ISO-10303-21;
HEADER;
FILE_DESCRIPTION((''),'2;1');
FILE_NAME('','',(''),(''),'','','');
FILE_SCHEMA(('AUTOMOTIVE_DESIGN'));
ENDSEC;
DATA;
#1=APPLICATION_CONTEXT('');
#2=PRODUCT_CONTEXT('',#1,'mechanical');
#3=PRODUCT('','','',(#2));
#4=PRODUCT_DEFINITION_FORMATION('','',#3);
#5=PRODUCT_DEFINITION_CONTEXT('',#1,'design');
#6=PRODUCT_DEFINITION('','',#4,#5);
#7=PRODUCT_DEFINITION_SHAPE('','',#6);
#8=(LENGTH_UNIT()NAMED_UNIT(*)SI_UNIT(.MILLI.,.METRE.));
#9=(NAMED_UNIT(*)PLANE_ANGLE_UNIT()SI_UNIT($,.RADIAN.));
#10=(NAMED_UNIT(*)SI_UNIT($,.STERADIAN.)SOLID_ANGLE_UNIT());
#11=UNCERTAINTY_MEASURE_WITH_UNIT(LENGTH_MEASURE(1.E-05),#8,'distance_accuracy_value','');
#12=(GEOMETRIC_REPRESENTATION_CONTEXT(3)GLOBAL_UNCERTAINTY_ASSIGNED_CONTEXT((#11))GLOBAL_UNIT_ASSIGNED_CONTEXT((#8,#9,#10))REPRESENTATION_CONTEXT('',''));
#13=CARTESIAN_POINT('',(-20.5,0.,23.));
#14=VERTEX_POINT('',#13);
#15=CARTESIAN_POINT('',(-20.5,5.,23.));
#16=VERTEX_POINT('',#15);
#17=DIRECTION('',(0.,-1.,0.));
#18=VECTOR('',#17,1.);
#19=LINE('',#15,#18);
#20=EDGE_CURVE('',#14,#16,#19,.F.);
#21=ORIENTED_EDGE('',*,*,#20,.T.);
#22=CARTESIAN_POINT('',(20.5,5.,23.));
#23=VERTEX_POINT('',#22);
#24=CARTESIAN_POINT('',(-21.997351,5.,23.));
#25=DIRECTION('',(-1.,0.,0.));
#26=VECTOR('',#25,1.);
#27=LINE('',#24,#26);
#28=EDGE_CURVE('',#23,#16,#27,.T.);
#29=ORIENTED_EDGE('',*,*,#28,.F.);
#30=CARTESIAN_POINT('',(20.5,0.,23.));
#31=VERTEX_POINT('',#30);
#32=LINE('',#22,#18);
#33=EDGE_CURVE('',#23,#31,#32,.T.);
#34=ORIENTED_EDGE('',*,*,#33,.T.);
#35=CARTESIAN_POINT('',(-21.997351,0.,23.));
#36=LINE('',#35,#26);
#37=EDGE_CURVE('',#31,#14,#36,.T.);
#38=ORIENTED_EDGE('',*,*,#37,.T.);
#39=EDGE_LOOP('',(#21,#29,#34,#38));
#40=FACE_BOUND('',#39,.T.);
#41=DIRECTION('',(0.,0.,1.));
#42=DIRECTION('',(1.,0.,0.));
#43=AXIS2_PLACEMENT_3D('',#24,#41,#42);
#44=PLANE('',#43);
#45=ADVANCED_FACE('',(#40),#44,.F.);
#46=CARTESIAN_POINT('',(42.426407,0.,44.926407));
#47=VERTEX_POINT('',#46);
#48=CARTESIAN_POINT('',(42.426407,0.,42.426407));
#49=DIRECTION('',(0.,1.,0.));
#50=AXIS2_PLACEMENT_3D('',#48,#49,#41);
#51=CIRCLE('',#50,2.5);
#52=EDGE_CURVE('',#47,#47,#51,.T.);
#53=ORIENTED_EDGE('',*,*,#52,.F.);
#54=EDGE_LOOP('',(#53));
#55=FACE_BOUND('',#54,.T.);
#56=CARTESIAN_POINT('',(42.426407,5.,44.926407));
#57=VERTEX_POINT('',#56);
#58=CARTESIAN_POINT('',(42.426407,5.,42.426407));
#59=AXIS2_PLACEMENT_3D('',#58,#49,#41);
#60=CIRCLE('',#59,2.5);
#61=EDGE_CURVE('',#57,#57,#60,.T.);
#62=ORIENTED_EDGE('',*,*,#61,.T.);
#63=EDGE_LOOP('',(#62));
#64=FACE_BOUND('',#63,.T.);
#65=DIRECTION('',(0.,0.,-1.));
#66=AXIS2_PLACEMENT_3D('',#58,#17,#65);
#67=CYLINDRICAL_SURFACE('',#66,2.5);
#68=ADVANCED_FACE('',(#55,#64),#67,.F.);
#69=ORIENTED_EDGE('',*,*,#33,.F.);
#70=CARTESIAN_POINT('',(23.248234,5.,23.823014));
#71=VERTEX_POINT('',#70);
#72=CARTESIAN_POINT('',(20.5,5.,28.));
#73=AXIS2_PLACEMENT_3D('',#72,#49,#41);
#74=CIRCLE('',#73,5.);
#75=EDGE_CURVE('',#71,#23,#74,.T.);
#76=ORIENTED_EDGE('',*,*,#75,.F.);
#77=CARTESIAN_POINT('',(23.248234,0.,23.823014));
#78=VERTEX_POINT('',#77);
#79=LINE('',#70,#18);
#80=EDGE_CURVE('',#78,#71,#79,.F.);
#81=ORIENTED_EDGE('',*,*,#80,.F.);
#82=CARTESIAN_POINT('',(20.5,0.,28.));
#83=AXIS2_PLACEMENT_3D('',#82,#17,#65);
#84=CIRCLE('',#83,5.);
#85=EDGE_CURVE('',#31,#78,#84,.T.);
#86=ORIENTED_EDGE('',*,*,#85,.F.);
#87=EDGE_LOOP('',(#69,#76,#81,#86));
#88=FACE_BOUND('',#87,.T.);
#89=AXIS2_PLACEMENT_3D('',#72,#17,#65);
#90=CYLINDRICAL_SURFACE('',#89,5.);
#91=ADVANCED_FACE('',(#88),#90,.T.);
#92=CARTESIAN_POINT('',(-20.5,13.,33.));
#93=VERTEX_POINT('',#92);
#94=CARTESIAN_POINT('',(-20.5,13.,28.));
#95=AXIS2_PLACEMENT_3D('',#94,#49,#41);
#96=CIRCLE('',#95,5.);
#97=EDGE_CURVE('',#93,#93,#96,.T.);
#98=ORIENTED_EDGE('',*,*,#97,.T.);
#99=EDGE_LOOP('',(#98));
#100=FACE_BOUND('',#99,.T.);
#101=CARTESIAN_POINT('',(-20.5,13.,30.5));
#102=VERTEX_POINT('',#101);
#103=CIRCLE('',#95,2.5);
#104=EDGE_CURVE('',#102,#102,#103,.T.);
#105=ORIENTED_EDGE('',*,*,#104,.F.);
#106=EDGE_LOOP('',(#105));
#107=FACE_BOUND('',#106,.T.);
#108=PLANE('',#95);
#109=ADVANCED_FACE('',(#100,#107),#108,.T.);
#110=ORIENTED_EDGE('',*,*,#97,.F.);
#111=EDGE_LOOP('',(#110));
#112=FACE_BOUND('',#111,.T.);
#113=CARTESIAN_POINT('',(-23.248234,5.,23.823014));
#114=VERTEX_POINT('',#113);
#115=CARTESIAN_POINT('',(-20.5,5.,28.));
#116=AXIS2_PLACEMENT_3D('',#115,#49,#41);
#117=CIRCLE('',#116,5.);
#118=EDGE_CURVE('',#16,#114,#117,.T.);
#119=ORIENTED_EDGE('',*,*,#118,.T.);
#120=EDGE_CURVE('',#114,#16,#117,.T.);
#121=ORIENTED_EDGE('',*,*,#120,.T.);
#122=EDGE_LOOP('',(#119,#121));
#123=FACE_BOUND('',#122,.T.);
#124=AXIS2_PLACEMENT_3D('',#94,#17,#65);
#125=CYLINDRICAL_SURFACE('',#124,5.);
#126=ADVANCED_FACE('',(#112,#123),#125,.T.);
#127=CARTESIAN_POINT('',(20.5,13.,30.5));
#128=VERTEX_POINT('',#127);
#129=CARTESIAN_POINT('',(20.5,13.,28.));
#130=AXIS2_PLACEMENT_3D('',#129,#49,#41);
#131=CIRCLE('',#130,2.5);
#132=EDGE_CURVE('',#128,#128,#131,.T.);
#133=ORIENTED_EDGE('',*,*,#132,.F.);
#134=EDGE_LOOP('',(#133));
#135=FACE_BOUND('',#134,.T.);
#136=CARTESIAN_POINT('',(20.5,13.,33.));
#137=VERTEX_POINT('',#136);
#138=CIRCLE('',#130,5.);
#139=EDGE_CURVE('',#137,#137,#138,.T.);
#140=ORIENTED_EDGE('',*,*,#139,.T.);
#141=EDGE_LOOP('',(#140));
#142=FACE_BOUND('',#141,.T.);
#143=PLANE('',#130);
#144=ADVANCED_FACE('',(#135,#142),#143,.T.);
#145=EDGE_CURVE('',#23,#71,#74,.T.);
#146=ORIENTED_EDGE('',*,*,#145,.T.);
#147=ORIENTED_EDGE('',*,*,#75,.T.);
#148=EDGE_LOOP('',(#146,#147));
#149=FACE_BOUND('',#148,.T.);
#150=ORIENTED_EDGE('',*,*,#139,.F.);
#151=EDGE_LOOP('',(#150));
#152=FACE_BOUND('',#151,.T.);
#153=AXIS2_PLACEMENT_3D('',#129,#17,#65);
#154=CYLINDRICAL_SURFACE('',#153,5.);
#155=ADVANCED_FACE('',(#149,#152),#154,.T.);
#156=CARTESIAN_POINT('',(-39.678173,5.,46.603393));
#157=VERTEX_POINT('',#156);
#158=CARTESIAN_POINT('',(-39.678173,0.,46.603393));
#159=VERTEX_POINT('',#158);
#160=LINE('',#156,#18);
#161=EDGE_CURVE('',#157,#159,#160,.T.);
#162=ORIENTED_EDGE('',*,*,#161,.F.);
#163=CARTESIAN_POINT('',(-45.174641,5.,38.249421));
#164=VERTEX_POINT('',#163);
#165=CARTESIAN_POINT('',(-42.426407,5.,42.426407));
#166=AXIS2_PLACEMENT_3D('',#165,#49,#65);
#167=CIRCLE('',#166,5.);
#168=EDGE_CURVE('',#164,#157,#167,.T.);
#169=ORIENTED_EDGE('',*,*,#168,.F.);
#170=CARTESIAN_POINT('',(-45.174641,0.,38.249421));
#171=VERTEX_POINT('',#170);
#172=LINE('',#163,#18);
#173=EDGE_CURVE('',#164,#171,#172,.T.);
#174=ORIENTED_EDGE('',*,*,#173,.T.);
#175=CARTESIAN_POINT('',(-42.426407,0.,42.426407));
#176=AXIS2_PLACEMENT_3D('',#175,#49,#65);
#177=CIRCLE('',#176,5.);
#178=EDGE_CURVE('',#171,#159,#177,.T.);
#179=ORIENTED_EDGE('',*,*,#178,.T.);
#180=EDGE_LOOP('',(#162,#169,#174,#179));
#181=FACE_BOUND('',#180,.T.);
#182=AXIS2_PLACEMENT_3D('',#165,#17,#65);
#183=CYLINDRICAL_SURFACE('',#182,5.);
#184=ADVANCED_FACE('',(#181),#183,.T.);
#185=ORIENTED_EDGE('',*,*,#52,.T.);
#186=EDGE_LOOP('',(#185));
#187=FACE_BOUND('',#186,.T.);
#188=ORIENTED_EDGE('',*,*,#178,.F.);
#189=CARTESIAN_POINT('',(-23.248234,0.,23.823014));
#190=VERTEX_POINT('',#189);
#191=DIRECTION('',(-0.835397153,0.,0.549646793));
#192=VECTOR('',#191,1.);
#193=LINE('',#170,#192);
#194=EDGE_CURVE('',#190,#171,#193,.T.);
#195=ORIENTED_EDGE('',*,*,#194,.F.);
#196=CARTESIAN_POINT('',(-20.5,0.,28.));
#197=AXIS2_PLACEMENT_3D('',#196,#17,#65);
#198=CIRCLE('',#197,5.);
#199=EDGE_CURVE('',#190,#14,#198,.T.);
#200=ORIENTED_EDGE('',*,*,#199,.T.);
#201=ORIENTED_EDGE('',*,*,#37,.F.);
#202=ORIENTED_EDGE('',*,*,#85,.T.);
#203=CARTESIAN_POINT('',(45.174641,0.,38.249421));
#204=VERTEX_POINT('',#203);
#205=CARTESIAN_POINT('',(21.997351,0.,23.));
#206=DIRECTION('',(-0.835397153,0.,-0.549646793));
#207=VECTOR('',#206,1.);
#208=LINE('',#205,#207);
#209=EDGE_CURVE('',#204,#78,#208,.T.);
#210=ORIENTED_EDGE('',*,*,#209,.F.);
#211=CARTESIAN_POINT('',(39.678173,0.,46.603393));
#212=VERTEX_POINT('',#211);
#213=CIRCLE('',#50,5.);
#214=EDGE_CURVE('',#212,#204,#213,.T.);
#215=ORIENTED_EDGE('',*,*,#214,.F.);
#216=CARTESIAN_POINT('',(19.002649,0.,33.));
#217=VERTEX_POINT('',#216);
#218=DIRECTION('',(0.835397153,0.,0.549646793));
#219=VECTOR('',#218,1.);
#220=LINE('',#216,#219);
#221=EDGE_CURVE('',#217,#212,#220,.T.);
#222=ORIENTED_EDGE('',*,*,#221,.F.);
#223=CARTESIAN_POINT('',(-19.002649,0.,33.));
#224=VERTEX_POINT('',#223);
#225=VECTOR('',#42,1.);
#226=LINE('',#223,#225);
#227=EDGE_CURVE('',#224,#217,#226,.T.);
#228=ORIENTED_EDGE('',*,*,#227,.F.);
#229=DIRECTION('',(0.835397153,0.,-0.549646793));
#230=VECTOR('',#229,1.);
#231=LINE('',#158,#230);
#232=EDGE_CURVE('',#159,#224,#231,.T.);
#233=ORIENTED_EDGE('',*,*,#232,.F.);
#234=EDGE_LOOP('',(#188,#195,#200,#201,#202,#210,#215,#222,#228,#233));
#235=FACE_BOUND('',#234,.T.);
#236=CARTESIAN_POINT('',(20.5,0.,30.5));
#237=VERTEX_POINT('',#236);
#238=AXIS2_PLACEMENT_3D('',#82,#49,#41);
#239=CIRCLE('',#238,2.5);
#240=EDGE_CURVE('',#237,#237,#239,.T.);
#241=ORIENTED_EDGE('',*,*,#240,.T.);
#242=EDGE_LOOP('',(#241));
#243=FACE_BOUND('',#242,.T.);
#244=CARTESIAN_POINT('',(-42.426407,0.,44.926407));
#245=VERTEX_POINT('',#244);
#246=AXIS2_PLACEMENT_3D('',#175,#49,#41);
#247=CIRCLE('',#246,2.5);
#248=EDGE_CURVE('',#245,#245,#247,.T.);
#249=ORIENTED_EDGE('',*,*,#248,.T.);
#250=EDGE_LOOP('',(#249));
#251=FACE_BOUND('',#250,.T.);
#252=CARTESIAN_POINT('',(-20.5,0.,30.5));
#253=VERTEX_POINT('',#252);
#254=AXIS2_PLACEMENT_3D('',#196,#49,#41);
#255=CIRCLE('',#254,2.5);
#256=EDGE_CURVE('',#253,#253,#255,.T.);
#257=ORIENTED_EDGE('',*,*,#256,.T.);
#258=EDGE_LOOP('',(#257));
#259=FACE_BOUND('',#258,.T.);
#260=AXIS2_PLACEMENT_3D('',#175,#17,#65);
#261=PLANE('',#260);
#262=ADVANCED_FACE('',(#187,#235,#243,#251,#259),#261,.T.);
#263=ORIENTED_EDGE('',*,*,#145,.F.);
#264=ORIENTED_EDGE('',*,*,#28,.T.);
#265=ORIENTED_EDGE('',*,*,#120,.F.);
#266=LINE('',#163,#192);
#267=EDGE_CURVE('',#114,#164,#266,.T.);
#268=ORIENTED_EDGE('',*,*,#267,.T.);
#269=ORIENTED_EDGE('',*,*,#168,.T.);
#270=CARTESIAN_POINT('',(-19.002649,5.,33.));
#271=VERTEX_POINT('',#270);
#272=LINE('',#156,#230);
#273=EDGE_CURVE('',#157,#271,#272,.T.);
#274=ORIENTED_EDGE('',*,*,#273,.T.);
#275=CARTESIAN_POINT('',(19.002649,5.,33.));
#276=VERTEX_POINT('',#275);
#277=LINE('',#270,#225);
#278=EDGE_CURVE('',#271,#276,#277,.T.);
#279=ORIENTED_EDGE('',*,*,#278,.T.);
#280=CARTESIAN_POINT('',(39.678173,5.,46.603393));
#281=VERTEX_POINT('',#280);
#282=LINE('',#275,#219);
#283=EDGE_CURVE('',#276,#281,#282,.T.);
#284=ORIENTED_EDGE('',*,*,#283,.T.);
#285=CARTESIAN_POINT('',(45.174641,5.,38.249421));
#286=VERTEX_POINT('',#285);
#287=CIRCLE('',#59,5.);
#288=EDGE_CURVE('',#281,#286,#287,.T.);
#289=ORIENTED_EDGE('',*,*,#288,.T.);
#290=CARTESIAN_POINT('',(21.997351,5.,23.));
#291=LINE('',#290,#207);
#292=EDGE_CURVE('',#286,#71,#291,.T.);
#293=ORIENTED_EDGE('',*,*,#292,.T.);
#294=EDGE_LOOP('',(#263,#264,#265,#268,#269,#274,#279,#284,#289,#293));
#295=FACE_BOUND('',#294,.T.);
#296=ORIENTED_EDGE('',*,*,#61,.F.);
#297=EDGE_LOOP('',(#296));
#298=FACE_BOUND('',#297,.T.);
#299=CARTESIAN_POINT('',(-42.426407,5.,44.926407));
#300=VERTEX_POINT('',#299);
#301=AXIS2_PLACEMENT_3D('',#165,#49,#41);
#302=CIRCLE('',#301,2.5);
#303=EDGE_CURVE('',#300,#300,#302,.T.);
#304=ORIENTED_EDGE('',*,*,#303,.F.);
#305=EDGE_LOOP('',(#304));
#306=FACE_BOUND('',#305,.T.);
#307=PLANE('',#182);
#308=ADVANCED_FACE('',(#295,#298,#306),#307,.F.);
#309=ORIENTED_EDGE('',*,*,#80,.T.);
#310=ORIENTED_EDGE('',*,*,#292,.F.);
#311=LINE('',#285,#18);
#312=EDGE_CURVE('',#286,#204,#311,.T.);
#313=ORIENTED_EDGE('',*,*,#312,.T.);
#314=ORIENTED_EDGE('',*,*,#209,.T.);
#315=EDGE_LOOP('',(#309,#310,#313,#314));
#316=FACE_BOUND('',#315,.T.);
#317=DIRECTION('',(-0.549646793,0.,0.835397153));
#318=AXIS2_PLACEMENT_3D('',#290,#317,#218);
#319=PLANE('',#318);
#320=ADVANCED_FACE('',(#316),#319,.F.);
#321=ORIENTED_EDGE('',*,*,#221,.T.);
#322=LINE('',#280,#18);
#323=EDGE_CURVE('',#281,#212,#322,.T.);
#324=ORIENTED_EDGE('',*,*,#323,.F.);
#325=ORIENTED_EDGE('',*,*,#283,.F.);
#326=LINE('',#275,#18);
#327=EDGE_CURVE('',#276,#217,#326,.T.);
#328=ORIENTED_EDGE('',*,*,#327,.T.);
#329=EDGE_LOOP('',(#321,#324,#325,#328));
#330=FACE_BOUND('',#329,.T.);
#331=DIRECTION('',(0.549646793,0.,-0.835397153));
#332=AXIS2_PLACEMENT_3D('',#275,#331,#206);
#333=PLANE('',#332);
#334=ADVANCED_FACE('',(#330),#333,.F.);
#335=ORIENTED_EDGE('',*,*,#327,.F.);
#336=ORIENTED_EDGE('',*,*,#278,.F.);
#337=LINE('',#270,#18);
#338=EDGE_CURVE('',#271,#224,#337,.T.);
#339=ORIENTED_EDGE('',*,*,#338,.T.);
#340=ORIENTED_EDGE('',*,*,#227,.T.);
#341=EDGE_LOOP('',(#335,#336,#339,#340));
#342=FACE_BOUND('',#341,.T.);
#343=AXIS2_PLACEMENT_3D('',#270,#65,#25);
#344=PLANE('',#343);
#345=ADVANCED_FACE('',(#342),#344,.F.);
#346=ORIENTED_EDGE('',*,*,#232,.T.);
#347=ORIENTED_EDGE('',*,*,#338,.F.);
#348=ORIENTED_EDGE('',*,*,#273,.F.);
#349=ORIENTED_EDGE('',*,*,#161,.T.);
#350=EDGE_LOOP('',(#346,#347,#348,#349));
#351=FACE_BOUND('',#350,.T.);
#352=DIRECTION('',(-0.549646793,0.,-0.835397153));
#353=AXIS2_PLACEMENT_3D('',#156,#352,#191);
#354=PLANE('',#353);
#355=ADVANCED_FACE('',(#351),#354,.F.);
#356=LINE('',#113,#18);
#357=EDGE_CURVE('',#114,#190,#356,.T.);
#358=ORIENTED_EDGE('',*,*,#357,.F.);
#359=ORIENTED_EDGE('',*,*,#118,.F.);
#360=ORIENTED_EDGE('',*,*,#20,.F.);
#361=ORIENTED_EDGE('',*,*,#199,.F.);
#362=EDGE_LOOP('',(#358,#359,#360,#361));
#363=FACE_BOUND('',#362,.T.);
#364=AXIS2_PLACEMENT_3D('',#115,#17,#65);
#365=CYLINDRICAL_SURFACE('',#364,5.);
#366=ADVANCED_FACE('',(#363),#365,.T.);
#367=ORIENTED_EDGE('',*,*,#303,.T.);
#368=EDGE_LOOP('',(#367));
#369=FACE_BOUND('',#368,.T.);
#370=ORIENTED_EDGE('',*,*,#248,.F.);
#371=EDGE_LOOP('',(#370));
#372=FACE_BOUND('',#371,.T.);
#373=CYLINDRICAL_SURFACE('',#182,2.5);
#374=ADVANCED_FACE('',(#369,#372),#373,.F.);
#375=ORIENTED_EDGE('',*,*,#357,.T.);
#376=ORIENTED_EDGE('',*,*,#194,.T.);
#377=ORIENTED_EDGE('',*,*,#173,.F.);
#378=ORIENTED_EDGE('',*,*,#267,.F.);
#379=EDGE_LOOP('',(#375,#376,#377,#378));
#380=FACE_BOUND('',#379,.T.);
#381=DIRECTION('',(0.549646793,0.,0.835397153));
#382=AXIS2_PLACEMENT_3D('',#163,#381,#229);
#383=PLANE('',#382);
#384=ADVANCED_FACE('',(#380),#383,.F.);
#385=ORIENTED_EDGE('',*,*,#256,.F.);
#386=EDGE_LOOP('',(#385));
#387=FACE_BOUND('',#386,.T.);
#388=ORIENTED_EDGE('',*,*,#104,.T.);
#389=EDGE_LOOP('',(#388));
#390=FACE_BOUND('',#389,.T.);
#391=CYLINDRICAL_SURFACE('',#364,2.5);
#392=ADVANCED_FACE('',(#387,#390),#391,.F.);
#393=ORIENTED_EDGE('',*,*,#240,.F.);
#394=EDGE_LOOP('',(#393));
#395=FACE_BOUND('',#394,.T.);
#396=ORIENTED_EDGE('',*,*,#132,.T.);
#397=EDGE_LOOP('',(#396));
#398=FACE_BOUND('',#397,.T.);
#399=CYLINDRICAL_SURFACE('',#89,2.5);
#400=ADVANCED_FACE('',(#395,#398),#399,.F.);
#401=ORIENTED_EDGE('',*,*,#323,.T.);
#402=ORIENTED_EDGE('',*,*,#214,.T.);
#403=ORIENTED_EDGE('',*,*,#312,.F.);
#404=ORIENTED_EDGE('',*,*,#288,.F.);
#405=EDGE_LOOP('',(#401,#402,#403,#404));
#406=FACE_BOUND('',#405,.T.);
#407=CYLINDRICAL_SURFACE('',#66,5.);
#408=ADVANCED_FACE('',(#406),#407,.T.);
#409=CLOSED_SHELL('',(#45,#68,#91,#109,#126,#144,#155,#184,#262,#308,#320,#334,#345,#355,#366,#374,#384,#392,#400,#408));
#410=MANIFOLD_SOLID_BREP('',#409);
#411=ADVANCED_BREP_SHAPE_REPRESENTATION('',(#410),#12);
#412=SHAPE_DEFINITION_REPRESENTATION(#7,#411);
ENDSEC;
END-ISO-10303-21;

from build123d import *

# Parameters (mm, degrees)
SKETCH2_R           = 2.5
BOSS_EXTRUDE1_DEPTH = 5
SKETCH3_R           = 5
SKETCH3_R_2         = 2.5
BOSS_EXTRUDE2_DEPTH = 8
FILLET1_R           = 5


with BuildPart() as part:
    # Sketch2 → Boss-Extrude1 (new body)
    with BuildSketch(Plane(origin=(0, 0, 0), x_dir=(1, 0, 0), z_dir=(0, 1, 0))):
        with BuildLine():
            Line((-39.678172905, -46.603392635), (-19.002648889, -33))
            Line((-19.002648889, -33), (19.002648889, -33))
            Line((19.002648889, -33), (39.678172905, -46.603392635))
            ThreePointArc((39.678172905, -46.603392635), (46.603392635, -45.174640837), (45.174640837, -38.249421108))
            Line((45.174640837, -38.249421108), (21.997351111, -23))
            Line((21.997351111, -23), (-21.997351111, -23))
            Line((-21.997351111, -23), (-45.174640837, -38.249421108))
            ThreePointArc((-45.174640837, -38.249421108), (-46.603392635, -45.174640837), (-39.678172905, -46.603392635))
        make_face()
        with Locations(Location((-42.426406871, -42.426406871, 0), (0, 0, 270))):
            Circle(SKETCH2_R, mode=Mode.SUBTRACT)
        with Locations(Location((-20.5, -28, 0), (0, 0, 270))):
            Circle(SKETCH2_R, mode=Mode.SUBTRACT)
        with Locations(Location((20.5, -28, 0), (0, 0, 270))):
            Circle(SKETCH2_R, mode=Mode.SUBTRACT)
        with Locations(Location((42.426406871, -42.426406871, 0), (0, 0, 270))):
            Circle(SKETCH2_R, mode=Mode.SUBTRACT)
    extrude(amount=BOSS_EXTRUDE1_DEPTH)

    # Sketch3 → Boss-Extrude2 (add)
    # profile 1 of 2: a face of its own
    with BuildSketch(Plane(origin=(0, 5, 0), x_dir=(1, 0, 0), z_dir=(0, 1, 0))):
        with Locations(Location((-20.5, -28, 0), (0, 0, 90))):
            Circle(SKETCH3_R)
        with Locations(Location((-20.5, -28, 0), (0, 0, 270))):
            Circle(SKETCH3_R_2, mode=Mode.SUBTRACT)
    # profile 2 of 2: a face of its own
    with BuildSketch(Plane(origin=(0, 5, 0), x_dir=(1, 0, 0), z_dir=(0, 1, 0))):
        with Locations(Location((20.5, -28, 0), (0, 0, 90))):
            Circle(SKETCH3_R)
        with Locations(Location((20.5, -28, 0), (0, 0, 270))):
            Circle(SKETCH3_R_2, mode=Mode.SUBTRACT)
    extrude(amount=BOSS_EXTRUDE2_DEPTH)

    # Fillet1
    # the kernel refuses this fillet: 5 mm, written as the material it takes off along each edge
    with BuildSketch(Plane(origin=(21.997351111, -3.743377778, 23), x_dir=(0.8353971526785962, 0, 0.5496467932195132), z_dir=(0, 1, 0)), Plane(origin=(-21.997351111, -3.743377778, 23), x_dir=(1, 0, 0), z_dir=(0, 1, 0))) as fillet1_piece_1:
        with BuildLine():
            CenterArc((FILLET1_R * 0.299470222244, -FILLET1_R), FILLET1_R, 90, 33.342784883)
            Line((-FILLET1_R * 0.250176570975, -FILLET1_R * 0.164602847321), (0, 0))
            Line((0, 0), (FILLET1_R * 0.299470222244, 0))
        make_face()
    extrude(amount=12.486755556, mode=Mode.SUBTRACT)


solid = part.part
